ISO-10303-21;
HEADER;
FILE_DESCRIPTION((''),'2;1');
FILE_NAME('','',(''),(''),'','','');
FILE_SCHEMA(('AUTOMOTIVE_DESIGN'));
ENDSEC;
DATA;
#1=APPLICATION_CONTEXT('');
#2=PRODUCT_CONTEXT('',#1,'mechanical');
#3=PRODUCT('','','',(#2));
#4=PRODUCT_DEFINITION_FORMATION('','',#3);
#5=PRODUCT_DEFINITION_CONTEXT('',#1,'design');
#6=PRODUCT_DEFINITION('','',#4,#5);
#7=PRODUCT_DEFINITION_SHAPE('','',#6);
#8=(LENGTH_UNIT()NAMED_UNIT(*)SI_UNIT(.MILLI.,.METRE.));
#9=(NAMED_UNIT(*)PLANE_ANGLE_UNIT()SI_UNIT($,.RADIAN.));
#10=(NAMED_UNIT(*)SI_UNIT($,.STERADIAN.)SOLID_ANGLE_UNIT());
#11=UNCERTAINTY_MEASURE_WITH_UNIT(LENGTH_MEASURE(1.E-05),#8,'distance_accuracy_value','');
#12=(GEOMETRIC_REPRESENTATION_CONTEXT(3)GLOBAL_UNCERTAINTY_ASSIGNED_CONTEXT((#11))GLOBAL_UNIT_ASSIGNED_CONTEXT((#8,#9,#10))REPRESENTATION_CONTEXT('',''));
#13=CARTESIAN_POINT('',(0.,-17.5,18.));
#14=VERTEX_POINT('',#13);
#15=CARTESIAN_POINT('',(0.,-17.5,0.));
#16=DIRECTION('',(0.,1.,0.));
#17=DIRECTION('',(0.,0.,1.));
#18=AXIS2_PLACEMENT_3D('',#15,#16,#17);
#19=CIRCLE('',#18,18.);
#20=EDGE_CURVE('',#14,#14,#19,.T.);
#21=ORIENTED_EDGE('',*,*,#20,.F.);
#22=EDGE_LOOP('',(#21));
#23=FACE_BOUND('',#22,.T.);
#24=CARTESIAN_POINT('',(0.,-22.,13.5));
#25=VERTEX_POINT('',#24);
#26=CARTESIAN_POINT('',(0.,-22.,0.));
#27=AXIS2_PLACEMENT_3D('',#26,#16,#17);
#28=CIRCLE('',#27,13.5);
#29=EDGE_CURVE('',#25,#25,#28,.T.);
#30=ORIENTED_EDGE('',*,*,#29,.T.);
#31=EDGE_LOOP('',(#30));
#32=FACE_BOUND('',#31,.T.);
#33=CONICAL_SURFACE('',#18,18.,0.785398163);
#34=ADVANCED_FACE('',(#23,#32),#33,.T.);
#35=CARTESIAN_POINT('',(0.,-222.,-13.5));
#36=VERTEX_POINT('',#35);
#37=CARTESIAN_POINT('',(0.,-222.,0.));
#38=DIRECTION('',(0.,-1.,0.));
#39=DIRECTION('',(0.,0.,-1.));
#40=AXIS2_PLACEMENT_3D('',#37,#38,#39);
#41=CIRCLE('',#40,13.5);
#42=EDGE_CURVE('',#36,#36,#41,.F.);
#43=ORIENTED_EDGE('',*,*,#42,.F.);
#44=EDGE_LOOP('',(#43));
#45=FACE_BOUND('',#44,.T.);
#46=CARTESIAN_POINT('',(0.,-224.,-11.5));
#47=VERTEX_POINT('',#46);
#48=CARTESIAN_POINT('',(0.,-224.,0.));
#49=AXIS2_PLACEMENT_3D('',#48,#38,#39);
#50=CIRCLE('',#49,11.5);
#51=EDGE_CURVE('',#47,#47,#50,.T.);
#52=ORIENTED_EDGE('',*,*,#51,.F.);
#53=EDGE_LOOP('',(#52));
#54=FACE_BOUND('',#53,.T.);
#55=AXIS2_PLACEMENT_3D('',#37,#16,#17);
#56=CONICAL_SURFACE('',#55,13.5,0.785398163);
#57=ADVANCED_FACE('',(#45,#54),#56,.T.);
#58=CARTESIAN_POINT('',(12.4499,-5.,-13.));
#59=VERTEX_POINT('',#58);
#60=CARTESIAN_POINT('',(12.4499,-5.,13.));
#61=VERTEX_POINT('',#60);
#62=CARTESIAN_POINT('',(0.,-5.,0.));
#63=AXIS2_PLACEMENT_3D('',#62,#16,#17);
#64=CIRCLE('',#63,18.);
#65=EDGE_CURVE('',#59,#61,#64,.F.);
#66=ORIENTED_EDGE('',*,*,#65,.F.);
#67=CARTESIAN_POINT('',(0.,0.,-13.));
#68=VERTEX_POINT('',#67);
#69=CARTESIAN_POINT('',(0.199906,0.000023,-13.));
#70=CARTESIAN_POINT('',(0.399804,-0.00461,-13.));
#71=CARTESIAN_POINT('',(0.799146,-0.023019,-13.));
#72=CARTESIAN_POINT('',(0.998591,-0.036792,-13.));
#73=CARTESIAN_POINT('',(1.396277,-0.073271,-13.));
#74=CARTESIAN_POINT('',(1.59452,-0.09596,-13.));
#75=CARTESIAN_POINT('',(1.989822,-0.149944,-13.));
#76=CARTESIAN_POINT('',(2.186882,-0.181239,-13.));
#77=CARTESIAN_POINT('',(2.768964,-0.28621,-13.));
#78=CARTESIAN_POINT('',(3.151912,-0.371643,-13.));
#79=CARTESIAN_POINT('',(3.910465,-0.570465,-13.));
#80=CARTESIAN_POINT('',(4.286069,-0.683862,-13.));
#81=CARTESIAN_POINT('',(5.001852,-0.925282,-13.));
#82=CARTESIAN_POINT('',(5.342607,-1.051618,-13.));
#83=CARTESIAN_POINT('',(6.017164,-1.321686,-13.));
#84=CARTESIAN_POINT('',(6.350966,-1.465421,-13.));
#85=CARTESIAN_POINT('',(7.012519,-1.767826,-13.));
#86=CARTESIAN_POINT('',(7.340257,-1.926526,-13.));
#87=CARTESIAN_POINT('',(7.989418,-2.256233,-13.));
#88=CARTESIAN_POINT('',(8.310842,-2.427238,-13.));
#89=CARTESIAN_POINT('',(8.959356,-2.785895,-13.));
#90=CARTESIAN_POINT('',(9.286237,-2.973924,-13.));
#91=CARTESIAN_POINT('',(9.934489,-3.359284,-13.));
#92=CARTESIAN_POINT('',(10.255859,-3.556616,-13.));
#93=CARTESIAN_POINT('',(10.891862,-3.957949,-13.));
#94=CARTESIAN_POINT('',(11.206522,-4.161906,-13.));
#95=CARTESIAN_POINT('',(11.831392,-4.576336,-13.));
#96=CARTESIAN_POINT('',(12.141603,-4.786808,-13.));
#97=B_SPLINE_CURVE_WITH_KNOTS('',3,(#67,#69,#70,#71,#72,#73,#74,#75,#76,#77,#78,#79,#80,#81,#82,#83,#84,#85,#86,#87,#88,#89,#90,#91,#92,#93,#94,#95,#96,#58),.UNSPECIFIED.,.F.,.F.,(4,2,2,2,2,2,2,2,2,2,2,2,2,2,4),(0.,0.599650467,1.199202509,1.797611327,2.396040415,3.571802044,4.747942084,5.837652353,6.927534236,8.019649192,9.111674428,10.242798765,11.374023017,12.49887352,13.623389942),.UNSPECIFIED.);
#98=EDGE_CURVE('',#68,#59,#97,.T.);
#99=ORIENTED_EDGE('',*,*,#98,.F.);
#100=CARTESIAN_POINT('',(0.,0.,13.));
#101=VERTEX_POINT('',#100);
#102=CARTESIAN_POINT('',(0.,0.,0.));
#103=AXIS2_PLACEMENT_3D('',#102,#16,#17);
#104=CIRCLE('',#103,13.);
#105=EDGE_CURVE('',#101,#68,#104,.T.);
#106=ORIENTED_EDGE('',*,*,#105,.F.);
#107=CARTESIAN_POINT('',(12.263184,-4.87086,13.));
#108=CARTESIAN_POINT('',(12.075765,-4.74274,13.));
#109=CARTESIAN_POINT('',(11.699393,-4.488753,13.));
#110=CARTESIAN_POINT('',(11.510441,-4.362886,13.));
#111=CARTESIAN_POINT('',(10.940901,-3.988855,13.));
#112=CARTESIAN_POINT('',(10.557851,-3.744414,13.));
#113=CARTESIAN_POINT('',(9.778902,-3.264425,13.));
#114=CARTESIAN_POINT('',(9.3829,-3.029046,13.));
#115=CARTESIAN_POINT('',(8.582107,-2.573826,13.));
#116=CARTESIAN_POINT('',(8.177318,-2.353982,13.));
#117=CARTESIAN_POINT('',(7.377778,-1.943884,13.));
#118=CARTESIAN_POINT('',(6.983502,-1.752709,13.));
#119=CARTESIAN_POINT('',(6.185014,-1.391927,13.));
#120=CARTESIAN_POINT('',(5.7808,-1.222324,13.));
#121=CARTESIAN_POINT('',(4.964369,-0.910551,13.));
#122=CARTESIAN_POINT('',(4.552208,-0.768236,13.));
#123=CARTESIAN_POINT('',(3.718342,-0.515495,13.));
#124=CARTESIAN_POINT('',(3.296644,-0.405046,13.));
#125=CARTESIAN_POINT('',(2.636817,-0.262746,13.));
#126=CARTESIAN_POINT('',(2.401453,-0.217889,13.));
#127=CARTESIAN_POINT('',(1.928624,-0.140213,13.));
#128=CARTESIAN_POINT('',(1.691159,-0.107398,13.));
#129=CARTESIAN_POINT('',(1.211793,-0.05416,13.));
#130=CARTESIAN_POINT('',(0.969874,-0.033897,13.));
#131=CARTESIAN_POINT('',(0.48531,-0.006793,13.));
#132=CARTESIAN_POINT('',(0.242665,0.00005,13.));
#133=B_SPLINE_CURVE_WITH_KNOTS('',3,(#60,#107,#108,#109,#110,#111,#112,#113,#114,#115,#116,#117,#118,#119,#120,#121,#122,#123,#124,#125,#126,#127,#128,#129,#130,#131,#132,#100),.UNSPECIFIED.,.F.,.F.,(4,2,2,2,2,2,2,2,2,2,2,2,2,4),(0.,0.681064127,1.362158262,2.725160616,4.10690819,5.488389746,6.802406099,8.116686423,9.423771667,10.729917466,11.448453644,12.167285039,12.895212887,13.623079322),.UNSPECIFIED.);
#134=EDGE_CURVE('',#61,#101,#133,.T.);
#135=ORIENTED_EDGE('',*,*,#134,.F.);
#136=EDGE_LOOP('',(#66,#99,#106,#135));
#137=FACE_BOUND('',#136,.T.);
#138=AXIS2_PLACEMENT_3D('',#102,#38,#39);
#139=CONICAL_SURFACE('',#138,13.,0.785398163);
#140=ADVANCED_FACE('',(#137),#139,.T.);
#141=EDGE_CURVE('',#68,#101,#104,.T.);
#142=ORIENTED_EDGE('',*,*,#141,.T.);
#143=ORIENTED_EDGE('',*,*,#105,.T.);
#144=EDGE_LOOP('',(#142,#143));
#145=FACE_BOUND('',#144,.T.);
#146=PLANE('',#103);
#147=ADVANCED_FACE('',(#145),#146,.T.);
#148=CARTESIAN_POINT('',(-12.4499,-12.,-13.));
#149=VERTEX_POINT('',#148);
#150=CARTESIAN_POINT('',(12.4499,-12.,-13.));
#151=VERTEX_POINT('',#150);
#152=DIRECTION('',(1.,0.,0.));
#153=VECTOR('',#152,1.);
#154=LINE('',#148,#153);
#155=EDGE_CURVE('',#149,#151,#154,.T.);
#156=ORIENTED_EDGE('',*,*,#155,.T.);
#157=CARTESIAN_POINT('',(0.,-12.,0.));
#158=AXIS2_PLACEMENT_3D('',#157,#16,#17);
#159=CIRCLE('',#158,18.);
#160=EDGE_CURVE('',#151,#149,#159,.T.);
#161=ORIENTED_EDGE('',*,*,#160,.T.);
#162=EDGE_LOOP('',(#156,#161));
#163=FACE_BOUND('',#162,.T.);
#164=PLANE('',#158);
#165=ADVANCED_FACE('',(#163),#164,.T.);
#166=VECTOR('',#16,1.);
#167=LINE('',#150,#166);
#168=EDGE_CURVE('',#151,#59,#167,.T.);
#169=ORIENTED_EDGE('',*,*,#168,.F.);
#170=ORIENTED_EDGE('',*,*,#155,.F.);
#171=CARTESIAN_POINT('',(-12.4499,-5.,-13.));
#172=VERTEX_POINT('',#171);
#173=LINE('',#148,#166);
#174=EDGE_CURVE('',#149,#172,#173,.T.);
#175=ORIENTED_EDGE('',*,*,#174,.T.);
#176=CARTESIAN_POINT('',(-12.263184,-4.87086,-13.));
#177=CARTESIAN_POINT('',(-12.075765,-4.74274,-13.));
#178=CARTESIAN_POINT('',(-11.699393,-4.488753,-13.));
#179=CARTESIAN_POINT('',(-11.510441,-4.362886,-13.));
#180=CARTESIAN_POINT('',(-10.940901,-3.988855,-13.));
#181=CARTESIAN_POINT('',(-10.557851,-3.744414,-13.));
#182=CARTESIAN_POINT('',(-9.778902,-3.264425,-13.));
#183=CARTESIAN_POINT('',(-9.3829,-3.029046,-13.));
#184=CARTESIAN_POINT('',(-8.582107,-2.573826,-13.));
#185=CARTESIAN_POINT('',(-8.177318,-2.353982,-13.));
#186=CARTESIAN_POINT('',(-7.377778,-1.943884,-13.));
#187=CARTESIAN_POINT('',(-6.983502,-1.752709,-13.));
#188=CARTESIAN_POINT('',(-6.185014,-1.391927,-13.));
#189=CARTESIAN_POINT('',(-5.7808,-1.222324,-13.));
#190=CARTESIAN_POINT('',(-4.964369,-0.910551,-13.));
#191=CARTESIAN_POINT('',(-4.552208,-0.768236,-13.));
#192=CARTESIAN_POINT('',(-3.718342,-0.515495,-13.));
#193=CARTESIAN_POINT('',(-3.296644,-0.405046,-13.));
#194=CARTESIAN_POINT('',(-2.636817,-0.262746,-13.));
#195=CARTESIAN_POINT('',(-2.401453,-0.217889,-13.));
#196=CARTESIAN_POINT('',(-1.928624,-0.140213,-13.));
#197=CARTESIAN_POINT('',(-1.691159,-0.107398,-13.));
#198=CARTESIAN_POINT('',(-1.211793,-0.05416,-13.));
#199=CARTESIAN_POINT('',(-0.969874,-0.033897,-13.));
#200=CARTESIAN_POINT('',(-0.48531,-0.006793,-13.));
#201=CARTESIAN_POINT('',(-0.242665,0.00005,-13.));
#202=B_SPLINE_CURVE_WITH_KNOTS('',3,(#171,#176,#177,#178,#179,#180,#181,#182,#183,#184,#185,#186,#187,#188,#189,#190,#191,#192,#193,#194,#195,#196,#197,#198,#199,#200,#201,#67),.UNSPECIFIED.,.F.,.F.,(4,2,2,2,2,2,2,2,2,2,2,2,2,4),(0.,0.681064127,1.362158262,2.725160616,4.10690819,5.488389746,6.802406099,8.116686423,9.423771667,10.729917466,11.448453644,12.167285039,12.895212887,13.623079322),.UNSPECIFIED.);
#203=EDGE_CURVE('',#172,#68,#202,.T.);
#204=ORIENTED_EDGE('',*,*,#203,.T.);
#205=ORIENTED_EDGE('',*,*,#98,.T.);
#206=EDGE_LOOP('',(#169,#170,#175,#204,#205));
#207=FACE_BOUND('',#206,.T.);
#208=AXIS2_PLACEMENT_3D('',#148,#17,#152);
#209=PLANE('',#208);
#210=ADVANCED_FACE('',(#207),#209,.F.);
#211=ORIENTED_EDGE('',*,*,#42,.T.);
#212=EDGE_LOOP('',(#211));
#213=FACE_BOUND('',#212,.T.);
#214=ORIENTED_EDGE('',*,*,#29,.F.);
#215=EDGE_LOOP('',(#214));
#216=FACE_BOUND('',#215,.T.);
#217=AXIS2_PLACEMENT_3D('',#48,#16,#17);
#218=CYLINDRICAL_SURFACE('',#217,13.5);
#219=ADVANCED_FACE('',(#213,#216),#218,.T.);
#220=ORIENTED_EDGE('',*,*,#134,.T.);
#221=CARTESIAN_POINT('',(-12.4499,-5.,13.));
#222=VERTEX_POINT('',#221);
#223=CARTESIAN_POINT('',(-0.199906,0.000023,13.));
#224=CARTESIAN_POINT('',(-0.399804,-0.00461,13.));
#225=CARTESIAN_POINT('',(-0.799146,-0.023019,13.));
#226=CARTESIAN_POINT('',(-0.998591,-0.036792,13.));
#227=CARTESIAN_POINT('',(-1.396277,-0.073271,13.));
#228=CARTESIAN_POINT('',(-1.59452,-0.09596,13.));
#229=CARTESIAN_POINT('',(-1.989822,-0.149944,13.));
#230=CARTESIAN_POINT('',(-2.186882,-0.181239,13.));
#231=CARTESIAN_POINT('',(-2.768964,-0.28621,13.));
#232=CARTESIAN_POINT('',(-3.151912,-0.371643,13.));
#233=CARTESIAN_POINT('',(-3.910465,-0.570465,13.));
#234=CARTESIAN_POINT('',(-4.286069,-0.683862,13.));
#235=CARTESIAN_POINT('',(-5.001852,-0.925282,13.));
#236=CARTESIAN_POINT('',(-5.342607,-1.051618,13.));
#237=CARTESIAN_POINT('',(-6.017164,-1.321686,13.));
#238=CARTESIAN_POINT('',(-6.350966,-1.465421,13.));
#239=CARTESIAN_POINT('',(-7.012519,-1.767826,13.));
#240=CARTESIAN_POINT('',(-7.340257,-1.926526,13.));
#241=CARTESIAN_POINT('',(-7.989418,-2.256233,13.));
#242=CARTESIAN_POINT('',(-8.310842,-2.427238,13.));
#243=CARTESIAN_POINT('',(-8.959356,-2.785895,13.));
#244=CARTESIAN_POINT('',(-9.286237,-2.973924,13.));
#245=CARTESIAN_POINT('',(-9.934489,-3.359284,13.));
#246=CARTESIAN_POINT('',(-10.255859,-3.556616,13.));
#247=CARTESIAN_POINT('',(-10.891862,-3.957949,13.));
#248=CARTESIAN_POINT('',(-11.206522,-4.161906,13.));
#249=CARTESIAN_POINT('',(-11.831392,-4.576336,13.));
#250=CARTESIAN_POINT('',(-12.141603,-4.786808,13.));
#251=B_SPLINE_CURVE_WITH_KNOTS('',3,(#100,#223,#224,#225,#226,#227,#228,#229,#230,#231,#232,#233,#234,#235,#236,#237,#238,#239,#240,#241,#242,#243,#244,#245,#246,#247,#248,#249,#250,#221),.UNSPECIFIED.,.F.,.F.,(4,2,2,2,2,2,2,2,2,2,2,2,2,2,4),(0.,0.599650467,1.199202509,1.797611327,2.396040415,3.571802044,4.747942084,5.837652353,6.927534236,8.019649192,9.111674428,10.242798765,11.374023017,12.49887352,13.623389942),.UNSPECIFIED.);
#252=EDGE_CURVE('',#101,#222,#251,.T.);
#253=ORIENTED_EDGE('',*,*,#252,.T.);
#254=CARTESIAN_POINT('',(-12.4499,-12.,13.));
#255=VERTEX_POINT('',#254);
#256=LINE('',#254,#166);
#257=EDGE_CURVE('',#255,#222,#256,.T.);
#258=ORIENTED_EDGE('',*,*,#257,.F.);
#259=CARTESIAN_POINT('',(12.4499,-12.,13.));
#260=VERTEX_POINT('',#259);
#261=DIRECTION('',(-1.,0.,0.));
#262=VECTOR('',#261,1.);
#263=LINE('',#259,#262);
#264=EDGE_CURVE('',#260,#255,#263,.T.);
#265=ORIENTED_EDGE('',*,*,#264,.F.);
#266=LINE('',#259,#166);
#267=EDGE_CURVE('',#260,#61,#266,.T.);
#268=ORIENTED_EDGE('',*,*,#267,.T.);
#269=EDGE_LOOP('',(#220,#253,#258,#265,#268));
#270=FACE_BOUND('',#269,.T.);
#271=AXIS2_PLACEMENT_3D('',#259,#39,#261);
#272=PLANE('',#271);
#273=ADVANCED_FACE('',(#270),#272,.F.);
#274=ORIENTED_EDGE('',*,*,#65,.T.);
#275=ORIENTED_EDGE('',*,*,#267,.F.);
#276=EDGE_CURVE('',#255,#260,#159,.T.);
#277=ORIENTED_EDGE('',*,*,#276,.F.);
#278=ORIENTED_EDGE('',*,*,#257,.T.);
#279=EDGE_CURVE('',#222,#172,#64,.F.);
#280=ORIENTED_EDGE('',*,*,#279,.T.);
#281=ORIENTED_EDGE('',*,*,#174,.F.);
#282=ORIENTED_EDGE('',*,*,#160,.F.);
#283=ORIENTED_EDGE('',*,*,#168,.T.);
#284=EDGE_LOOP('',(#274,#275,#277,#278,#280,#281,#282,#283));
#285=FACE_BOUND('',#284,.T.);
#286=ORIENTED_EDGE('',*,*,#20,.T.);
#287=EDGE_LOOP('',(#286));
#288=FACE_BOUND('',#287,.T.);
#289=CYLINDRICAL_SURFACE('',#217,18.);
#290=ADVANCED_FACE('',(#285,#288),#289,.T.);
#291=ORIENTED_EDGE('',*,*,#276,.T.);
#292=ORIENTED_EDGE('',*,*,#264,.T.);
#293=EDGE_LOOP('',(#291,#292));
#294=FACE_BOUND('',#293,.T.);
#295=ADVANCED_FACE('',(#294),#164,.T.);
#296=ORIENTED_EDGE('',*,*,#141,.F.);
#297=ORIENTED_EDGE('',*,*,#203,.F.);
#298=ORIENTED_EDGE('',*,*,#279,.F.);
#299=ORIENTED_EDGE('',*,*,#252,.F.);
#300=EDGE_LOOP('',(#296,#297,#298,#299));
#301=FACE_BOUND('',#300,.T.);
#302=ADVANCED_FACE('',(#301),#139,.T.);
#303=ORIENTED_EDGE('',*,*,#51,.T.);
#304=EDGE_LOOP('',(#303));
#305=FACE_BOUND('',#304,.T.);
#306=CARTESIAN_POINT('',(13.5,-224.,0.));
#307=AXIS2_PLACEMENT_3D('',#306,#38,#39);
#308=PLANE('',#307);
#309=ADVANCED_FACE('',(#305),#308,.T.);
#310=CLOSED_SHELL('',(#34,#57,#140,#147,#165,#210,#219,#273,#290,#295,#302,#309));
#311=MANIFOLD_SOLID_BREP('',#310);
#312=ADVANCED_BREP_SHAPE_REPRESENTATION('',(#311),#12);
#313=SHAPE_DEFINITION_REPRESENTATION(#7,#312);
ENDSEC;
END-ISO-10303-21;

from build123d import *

# Parameters (mm, degrees)
CUT_EXTRUDE_START   = -12
CUT_EXTRUDE_1_DEPTH = 12
CUT_EXTRUDE_2_DEPTH = 12
CHAMFER_1_SIZE      = 5
CHAMFER_2_SIZE      = 2


with BuildPart() as part:
    # Эскиз1 → Повернуть1 (revolve)
    with BuildSketch(Plane(origin=(0, 0, 0), x_dir=(-1, 0, 0), z_dir=(0, 0, -1)), mode=Mode.PRIVATE) as revolve_1_sk:
        Polygon((-13.5, -224), (0, -224), (0, 0), (-18, 0), (-18, -17.5), (-13.5, -22), align=None)
    revolve(revolve_1_sk.sketch.rotate(Axis((0, -224, 0), (0, 1, 0)), 270), axis=Axis((0, -224, 0), (0, 1, 0)))

    # Эскиз2 → Вырез-Вытянуть1 (cut)
    with BuildSketch(Plane(origin=(0, 0, 0), x_dir=(-1, 0, 0), z_dir=(0, 1, 0)).offset(CUT_EXTRUDE_START)):
        with BuildLine():
            Line((-12.449899598, 13), (12.449899598, 13))
            ThreePointArc((12.449899598, 13), (0, 18), (-12.449899598, 13))
        make_face()
    extrude(amount=CUT_EXTRUDE_1_DEPTH, mode=Mode.SUBTRACT)

    # Эскиз3 → Вырез-Вытянуть2 (cut)
    with BuildSketch(Plane(origin=(0, 0, 0), x_dir=(-1, 0, 0), z_dir=(0, 1, 0)).offset(CUT_EXTRUDE_START)):
        with BuildLine():
            Line((12.449899598, -13), (-12.449899598, -13))
            ThreePointArc((-12.449899598, -13), (0, -18), (12.449899598, -13))
        make_face()
    extrude(amount=CUT_EXTRUDE_2_DEPTH, mode=Mode.SUBTRACT)

    # Фаска1
    chamfer_1_edges = [part.edges().sort_by_distance(p)[0] for p in [
        (-18, 0, 0),
        (18, 0, 0),
    ]]
    chamfer(chamfer_1_edges, length=CHAMFER_1_SIZE - 0.0001)  # a hair under: the kernel refuses the full size

    # Фаска2
    chamfer_2_edges = [part.edges().sort_by_distance(p)[0] for p in [
        (0, -224, -13.5),
    ]]
    chamfer(chamfer_2_edges, length=CHAMFER_2_SIZE)


solid = part.part
